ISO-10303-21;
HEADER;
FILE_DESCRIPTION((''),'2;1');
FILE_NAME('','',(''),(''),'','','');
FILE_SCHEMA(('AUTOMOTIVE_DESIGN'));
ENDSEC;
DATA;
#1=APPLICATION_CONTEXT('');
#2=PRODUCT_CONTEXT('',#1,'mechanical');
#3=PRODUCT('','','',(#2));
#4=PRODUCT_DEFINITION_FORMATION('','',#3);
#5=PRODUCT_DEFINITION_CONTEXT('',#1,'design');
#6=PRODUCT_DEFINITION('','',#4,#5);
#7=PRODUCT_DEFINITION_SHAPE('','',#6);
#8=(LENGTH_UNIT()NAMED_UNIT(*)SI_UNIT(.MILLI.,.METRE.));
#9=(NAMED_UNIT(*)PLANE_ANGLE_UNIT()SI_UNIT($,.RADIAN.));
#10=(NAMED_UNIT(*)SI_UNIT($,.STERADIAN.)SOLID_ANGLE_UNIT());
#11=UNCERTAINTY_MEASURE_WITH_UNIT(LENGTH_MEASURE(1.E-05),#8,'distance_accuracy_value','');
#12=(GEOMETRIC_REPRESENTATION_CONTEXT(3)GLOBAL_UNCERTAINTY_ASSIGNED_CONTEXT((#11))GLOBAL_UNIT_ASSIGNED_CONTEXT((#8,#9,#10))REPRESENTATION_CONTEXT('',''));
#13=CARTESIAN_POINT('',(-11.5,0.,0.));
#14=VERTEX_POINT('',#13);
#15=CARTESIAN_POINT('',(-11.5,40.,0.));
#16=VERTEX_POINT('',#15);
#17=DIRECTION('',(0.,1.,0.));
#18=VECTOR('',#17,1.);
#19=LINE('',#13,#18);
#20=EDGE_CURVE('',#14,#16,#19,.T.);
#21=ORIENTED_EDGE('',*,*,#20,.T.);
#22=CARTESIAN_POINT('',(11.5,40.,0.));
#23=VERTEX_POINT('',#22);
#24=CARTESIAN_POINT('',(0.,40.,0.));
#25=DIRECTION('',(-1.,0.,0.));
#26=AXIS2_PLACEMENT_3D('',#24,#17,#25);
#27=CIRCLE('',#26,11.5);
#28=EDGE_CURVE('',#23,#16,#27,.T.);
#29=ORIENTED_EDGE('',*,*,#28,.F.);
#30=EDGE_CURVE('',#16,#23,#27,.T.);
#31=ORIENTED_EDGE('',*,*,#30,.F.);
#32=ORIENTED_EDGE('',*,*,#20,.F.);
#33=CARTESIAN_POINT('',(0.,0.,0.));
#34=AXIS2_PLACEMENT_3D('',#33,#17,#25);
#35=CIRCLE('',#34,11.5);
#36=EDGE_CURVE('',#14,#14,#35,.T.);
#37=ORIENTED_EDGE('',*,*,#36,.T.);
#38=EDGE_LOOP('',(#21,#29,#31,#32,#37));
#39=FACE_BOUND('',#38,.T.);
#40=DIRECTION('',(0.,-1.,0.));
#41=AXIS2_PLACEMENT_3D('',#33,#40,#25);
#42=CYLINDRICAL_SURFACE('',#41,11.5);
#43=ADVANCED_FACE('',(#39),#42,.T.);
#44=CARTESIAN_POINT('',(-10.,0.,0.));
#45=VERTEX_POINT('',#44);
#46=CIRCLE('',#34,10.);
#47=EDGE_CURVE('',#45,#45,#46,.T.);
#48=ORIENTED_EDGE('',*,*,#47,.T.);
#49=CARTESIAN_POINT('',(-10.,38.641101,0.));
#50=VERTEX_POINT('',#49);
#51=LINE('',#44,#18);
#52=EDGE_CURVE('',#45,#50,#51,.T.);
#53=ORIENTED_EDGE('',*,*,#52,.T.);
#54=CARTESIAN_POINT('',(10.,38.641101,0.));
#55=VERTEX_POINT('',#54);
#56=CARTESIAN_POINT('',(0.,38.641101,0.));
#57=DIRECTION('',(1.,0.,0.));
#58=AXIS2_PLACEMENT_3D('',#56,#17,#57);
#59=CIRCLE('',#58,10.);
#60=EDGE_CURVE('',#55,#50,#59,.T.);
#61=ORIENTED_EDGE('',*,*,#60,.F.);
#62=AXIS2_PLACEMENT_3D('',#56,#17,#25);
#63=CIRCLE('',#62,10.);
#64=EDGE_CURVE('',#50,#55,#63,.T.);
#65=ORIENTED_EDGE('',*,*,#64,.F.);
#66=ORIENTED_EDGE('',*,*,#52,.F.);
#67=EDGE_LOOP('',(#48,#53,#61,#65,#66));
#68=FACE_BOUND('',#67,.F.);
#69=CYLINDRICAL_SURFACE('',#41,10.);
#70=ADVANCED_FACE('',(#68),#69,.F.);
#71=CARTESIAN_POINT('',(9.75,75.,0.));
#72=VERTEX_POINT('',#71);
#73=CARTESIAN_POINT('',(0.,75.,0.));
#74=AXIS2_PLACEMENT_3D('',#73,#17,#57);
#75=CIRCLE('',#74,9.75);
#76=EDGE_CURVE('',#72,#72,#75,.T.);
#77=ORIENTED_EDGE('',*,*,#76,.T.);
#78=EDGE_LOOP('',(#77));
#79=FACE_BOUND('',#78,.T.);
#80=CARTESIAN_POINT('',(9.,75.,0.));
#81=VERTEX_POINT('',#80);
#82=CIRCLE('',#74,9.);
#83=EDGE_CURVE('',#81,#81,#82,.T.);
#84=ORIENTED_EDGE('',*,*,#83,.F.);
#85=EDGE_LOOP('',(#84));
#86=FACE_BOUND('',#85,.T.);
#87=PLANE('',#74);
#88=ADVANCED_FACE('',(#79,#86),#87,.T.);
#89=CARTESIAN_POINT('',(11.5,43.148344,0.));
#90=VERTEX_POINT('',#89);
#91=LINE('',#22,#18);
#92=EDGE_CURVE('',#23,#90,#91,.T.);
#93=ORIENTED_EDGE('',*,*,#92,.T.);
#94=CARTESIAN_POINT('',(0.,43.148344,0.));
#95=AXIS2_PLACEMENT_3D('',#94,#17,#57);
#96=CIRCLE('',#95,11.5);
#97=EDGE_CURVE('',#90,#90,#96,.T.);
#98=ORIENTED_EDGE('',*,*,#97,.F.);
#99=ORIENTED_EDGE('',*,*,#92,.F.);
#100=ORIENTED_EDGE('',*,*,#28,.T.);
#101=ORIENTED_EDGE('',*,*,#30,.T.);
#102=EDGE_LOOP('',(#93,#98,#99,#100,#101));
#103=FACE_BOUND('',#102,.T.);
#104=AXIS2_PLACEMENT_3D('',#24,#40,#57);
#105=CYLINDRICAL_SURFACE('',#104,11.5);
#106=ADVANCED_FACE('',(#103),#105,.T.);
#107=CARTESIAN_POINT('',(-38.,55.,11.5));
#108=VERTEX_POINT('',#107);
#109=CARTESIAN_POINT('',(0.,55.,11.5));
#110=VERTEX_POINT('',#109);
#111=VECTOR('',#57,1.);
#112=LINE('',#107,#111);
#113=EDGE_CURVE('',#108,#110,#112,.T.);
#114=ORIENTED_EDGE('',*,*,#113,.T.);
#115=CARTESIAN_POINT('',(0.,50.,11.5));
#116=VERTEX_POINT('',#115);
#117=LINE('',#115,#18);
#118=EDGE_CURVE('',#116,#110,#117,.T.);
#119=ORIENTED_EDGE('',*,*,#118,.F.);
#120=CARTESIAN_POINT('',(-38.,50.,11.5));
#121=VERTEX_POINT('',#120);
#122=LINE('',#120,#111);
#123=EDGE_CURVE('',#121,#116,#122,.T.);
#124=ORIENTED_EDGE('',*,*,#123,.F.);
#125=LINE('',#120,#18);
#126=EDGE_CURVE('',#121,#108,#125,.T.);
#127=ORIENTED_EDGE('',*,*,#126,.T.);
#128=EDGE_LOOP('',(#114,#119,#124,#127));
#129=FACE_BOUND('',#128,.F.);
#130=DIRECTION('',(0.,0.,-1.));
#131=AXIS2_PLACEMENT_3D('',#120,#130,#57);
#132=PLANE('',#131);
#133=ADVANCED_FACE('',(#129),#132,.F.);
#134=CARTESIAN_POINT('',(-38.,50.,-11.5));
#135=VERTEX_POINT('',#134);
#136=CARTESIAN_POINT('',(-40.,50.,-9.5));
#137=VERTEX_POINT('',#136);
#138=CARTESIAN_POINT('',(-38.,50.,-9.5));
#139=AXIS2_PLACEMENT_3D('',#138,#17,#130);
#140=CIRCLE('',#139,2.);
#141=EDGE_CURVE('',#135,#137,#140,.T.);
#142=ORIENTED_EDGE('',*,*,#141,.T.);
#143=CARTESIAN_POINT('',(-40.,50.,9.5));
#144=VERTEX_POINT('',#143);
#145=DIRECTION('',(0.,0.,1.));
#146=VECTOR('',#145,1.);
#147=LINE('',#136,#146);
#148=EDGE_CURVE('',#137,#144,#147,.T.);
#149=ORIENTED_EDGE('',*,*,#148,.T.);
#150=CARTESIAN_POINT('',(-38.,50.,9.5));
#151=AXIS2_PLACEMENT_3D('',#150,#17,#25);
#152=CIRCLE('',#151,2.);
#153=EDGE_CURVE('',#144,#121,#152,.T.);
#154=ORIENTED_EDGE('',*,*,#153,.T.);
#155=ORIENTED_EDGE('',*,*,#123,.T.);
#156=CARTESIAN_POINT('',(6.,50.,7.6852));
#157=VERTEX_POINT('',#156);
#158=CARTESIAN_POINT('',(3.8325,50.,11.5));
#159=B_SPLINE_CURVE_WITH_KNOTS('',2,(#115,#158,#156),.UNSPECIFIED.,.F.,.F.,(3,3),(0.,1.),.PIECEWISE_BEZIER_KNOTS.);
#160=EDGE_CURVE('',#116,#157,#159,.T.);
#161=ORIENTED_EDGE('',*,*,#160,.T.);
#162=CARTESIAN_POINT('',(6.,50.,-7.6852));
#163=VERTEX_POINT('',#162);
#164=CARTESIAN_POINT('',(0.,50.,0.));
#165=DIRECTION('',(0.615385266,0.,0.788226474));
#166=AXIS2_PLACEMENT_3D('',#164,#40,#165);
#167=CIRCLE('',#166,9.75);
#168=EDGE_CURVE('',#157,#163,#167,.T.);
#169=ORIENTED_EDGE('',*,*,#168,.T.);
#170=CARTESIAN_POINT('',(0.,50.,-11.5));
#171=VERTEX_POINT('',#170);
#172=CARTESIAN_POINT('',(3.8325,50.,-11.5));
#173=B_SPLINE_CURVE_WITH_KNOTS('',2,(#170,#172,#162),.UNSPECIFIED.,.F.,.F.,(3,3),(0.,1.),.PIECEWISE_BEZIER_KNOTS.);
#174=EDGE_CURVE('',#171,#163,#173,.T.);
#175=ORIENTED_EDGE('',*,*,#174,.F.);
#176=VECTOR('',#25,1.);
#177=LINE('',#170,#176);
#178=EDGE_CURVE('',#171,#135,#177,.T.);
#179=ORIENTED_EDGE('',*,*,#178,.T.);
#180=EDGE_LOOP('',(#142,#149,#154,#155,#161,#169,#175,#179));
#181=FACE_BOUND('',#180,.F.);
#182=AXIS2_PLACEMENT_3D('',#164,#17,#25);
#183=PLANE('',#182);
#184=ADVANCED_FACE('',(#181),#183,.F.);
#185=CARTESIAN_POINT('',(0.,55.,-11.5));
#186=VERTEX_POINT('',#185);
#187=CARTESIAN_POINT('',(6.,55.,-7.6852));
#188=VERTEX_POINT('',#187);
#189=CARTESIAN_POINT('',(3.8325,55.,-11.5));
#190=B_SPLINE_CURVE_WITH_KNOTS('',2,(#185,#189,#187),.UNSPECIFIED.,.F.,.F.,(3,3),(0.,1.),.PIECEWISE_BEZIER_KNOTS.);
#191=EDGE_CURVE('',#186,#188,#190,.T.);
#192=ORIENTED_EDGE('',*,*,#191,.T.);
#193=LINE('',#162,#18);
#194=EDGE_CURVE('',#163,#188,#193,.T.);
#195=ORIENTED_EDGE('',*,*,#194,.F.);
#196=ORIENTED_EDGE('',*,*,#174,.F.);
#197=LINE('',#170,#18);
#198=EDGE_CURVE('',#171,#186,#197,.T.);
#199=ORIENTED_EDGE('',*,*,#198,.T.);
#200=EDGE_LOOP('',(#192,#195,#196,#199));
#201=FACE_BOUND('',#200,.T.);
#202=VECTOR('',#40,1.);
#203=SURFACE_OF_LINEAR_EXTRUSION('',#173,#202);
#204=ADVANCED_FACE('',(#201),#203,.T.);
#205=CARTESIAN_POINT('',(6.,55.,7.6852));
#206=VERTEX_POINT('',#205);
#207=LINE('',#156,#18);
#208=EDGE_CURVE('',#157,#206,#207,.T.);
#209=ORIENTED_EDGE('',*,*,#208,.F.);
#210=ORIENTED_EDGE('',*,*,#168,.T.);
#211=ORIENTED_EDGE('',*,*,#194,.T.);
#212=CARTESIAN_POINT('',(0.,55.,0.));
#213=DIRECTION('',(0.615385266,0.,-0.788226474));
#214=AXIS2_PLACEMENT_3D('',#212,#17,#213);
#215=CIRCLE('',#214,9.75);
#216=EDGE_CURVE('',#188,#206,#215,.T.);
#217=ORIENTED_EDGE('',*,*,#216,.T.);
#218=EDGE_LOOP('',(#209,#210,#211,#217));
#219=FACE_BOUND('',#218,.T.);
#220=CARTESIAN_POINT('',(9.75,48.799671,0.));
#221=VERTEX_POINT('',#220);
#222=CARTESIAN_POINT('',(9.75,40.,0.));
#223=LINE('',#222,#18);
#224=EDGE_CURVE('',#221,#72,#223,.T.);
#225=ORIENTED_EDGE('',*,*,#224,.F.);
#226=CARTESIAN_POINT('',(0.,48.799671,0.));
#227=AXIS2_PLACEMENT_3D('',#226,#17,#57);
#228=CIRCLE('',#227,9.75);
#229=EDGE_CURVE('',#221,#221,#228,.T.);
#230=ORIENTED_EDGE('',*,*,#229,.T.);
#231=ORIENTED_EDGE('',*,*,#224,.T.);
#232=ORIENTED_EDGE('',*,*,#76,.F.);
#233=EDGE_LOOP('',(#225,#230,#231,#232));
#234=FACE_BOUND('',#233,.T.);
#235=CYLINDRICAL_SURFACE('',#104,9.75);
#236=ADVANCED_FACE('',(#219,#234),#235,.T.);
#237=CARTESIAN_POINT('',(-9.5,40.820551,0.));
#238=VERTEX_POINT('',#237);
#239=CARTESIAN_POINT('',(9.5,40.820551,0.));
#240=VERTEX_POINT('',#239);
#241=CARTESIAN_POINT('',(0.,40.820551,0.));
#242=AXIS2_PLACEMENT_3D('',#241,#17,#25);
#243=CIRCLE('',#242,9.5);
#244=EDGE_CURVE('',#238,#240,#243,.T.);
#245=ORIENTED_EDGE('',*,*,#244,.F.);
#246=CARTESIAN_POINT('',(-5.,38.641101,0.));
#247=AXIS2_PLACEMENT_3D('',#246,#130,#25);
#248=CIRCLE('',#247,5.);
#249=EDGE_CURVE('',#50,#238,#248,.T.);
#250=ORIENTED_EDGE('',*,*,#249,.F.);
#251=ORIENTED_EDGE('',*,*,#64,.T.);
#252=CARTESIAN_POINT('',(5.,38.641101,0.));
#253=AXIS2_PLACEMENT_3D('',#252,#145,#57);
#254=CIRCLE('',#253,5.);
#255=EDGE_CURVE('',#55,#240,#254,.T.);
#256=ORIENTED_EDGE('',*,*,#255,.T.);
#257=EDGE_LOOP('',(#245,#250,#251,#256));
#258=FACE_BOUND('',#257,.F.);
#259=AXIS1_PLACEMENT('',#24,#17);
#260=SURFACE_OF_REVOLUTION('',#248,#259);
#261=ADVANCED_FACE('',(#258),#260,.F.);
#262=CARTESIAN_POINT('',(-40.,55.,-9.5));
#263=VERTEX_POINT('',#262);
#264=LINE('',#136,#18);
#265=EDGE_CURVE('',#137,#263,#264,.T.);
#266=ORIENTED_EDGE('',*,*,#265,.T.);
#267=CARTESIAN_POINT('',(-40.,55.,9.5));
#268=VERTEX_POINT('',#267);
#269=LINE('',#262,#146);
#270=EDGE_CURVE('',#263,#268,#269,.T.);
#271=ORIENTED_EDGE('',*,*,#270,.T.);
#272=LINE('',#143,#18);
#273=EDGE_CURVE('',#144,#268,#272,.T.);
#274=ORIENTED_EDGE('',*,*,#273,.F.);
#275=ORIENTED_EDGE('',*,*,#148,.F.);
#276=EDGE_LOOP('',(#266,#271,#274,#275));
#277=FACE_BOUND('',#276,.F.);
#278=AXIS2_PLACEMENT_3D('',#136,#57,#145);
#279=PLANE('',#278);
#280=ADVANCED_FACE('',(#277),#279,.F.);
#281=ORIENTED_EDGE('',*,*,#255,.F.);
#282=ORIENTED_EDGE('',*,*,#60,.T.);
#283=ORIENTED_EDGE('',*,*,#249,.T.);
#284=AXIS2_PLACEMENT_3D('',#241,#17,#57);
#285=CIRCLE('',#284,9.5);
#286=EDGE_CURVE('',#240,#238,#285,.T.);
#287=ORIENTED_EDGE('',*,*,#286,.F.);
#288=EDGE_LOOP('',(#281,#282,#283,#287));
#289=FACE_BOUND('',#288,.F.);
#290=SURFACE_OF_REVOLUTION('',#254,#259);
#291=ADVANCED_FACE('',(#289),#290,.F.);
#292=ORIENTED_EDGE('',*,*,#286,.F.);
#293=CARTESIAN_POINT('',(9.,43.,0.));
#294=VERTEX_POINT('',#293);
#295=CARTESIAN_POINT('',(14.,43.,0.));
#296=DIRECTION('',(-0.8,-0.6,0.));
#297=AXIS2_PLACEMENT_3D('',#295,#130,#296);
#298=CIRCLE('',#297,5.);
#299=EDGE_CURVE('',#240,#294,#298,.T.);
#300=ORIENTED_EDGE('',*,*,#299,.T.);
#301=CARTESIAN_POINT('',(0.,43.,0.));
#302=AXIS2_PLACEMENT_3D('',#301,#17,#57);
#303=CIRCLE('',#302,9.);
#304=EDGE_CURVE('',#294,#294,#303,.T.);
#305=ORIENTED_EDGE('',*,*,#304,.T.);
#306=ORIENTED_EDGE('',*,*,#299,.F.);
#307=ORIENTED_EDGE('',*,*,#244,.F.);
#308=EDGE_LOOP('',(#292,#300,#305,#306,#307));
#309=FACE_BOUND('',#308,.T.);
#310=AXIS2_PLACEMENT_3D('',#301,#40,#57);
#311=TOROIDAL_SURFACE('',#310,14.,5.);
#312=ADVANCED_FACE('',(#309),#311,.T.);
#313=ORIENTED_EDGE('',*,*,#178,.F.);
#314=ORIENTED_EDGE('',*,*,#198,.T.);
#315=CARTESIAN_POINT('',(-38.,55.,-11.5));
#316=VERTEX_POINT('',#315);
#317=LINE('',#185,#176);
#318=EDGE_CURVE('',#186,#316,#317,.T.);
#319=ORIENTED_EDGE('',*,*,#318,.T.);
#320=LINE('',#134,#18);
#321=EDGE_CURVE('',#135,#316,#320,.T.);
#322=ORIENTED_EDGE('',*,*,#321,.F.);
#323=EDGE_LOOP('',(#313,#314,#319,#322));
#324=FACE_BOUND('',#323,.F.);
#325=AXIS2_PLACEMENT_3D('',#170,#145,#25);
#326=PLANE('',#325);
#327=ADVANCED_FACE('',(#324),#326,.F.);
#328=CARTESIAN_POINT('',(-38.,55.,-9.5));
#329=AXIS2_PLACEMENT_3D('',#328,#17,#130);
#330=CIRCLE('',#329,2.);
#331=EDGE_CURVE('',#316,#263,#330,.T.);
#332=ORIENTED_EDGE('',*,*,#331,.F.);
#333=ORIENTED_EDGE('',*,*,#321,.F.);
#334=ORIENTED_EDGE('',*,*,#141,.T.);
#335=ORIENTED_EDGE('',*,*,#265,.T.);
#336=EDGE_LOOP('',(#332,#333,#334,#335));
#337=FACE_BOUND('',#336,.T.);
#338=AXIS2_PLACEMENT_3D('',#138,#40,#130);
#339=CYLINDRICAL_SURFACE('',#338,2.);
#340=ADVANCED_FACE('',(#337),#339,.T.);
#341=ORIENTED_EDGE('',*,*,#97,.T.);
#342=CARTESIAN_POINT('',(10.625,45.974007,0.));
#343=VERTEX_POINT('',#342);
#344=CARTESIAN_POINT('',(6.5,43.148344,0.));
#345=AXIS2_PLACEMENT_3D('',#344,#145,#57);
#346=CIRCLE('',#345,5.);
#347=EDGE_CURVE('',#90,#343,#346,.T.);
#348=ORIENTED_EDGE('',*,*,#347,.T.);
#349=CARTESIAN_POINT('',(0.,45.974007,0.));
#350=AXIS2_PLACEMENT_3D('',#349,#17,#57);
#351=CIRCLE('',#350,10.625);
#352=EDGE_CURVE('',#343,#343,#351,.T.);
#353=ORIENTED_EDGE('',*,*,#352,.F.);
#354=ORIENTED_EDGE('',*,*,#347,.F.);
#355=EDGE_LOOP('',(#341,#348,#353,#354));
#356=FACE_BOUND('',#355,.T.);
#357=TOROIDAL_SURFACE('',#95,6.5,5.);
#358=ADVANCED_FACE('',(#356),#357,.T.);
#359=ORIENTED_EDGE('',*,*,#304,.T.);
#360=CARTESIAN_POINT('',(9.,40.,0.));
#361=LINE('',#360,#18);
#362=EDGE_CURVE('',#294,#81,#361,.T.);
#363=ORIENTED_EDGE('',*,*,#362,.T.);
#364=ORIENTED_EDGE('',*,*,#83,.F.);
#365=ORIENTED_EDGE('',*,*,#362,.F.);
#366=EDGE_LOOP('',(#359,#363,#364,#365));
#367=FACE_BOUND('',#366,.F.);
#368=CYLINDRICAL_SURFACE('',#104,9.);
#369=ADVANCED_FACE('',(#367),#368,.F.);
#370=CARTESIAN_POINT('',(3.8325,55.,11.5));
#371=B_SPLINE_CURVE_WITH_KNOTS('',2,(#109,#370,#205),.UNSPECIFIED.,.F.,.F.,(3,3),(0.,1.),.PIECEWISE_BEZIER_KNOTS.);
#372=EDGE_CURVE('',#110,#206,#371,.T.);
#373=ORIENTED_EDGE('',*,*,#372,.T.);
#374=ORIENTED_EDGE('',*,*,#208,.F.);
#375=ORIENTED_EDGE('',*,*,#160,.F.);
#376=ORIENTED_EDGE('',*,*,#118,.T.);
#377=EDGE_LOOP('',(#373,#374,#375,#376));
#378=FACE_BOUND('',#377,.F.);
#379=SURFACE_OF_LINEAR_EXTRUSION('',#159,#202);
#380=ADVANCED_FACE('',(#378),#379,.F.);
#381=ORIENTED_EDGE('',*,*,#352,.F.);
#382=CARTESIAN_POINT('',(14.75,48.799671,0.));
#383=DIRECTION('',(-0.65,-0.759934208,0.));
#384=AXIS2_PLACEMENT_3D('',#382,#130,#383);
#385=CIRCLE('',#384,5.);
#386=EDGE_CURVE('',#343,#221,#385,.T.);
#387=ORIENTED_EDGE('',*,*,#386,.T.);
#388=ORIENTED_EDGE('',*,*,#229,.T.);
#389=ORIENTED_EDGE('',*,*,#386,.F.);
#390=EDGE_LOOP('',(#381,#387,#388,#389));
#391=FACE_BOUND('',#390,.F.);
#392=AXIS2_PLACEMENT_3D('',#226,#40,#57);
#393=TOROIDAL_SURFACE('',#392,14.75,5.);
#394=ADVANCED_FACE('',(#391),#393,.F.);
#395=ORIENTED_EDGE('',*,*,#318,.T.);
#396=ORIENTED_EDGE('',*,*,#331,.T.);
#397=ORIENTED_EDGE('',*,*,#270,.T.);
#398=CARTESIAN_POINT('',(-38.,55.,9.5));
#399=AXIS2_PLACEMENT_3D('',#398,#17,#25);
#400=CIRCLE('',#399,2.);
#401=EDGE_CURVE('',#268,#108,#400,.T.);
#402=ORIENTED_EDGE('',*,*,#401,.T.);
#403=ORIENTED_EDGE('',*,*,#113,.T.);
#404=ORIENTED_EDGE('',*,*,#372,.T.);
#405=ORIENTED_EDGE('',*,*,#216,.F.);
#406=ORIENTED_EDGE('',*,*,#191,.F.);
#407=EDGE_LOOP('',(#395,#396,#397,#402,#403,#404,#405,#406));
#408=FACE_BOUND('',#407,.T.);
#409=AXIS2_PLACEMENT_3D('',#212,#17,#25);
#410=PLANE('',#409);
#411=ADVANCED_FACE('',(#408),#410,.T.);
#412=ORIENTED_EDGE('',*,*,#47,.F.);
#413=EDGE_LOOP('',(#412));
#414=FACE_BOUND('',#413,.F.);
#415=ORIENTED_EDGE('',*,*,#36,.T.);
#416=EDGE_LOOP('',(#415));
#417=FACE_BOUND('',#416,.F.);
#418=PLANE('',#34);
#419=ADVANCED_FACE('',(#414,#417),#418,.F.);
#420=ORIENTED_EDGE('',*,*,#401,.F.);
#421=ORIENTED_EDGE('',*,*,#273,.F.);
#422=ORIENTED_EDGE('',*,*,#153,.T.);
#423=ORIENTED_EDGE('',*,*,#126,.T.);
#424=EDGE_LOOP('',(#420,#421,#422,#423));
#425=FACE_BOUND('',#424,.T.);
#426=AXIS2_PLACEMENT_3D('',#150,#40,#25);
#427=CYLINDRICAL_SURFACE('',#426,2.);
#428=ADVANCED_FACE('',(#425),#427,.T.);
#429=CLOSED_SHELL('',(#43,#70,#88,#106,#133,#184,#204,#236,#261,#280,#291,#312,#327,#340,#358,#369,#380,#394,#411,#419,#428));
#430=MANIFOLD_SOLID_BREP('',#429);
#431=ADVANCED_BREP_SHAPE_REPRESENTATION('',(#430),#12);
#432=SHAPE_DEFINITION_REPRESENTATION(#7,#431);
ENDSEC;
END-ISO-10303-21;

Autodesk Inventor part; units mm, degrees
ref_plane "YZ Plane" through (0, 0, 0) normal (1, 0, 0) x (0, 1, 0)
ref_plane "XY Plane" through (0, 0, 0) normal (0, 0, 1) x (1, 0, 0)
sketch "Sketch1" plane through (0, 0, 0) normal (0, 1, 0) x (-1, 0, 0)
  circle A0 centre (0, 0) radius 10
  circle A1 centre (0, 0) radius 11.5
  dimension "d0" = 20
  dimension "d1" = 23
extrude "Extrusion1" add sketch "Sketch1" along normal blind 40
sketch "Sketch2" plane through (0, 40, 0) normal (0, 1, 0) x (1, 0, 0)
  circle A0 centre (0, 0) radius 9.75
  circle A1 centre (0, 0) radius 9
  dimension "d4" = 19.5
extrude "Extrusion2" add sketch "Sketch2" along normal blind 35
sketch "Sketch3" plane through (0, 40, 0) normal (0, 1, 0) x (1, 0, 0)
  circle A0 centre (0, 0) radius 9.75 projected
  circle A1 centre (0, 0) radius 11.5 projected
extrude "Extrusion3" add sketch "Sketch3" along normal blind 5
fillet "Fillet1" radius 5 2 edges at (-9.75, 45, 0) (-11.5, 45, 0)
fillet "Fillet2" radius 5 2 edges at (-9, 40, 0) (10, 40, 0)
ref_plane "Work Plane1" through (0, 50, 0) normal (0, 1, 0) x (-1, 0, 0)
sketch "Sketch4" plane through (0, 50, 0) normal (0, 1, 0) x (-1, 0, 0)
  circle A0 centre (0, 0) radius 11.5 projected
  line L0 (0, -11.5) -> (38, -11.5)
  line L1 (40, -9.5) -> (40, 9.5)
  line L2 (38, 11.5) -> (0, 11.5)
  arc A1 (40, 9.5) -> (38, 11.5) centre (38, 9.5) ccw
  arc A2 (38, -11.5) -> (40, -9.5) centre (38, -9.5) ccw
  circle A3 centre (0, 0) radius 9.75 projected
  spline S0 degree 2 poles (0, -11.5) (-3.8325, -11.5) (-6, -7.6852) knots 0 0 0 1 1 1
  spline S1 degree 2 poles (0, 11.5) (-3.8325, 11.5) (-6, 7.6852) knots 0 0 0 1 1 1
  point P0 (40, -11.5)
  dimension "d19" = 40
  dimension "d20" = 2
extrude "Extrusion5" add sketch "Sketch4" along normal blind 5 contours A0 S0 A3 S1 | A0 L2 A1 L1 A2 L0 picked at (10.8206, -0.853)
properties part number "Elbow Extension"
